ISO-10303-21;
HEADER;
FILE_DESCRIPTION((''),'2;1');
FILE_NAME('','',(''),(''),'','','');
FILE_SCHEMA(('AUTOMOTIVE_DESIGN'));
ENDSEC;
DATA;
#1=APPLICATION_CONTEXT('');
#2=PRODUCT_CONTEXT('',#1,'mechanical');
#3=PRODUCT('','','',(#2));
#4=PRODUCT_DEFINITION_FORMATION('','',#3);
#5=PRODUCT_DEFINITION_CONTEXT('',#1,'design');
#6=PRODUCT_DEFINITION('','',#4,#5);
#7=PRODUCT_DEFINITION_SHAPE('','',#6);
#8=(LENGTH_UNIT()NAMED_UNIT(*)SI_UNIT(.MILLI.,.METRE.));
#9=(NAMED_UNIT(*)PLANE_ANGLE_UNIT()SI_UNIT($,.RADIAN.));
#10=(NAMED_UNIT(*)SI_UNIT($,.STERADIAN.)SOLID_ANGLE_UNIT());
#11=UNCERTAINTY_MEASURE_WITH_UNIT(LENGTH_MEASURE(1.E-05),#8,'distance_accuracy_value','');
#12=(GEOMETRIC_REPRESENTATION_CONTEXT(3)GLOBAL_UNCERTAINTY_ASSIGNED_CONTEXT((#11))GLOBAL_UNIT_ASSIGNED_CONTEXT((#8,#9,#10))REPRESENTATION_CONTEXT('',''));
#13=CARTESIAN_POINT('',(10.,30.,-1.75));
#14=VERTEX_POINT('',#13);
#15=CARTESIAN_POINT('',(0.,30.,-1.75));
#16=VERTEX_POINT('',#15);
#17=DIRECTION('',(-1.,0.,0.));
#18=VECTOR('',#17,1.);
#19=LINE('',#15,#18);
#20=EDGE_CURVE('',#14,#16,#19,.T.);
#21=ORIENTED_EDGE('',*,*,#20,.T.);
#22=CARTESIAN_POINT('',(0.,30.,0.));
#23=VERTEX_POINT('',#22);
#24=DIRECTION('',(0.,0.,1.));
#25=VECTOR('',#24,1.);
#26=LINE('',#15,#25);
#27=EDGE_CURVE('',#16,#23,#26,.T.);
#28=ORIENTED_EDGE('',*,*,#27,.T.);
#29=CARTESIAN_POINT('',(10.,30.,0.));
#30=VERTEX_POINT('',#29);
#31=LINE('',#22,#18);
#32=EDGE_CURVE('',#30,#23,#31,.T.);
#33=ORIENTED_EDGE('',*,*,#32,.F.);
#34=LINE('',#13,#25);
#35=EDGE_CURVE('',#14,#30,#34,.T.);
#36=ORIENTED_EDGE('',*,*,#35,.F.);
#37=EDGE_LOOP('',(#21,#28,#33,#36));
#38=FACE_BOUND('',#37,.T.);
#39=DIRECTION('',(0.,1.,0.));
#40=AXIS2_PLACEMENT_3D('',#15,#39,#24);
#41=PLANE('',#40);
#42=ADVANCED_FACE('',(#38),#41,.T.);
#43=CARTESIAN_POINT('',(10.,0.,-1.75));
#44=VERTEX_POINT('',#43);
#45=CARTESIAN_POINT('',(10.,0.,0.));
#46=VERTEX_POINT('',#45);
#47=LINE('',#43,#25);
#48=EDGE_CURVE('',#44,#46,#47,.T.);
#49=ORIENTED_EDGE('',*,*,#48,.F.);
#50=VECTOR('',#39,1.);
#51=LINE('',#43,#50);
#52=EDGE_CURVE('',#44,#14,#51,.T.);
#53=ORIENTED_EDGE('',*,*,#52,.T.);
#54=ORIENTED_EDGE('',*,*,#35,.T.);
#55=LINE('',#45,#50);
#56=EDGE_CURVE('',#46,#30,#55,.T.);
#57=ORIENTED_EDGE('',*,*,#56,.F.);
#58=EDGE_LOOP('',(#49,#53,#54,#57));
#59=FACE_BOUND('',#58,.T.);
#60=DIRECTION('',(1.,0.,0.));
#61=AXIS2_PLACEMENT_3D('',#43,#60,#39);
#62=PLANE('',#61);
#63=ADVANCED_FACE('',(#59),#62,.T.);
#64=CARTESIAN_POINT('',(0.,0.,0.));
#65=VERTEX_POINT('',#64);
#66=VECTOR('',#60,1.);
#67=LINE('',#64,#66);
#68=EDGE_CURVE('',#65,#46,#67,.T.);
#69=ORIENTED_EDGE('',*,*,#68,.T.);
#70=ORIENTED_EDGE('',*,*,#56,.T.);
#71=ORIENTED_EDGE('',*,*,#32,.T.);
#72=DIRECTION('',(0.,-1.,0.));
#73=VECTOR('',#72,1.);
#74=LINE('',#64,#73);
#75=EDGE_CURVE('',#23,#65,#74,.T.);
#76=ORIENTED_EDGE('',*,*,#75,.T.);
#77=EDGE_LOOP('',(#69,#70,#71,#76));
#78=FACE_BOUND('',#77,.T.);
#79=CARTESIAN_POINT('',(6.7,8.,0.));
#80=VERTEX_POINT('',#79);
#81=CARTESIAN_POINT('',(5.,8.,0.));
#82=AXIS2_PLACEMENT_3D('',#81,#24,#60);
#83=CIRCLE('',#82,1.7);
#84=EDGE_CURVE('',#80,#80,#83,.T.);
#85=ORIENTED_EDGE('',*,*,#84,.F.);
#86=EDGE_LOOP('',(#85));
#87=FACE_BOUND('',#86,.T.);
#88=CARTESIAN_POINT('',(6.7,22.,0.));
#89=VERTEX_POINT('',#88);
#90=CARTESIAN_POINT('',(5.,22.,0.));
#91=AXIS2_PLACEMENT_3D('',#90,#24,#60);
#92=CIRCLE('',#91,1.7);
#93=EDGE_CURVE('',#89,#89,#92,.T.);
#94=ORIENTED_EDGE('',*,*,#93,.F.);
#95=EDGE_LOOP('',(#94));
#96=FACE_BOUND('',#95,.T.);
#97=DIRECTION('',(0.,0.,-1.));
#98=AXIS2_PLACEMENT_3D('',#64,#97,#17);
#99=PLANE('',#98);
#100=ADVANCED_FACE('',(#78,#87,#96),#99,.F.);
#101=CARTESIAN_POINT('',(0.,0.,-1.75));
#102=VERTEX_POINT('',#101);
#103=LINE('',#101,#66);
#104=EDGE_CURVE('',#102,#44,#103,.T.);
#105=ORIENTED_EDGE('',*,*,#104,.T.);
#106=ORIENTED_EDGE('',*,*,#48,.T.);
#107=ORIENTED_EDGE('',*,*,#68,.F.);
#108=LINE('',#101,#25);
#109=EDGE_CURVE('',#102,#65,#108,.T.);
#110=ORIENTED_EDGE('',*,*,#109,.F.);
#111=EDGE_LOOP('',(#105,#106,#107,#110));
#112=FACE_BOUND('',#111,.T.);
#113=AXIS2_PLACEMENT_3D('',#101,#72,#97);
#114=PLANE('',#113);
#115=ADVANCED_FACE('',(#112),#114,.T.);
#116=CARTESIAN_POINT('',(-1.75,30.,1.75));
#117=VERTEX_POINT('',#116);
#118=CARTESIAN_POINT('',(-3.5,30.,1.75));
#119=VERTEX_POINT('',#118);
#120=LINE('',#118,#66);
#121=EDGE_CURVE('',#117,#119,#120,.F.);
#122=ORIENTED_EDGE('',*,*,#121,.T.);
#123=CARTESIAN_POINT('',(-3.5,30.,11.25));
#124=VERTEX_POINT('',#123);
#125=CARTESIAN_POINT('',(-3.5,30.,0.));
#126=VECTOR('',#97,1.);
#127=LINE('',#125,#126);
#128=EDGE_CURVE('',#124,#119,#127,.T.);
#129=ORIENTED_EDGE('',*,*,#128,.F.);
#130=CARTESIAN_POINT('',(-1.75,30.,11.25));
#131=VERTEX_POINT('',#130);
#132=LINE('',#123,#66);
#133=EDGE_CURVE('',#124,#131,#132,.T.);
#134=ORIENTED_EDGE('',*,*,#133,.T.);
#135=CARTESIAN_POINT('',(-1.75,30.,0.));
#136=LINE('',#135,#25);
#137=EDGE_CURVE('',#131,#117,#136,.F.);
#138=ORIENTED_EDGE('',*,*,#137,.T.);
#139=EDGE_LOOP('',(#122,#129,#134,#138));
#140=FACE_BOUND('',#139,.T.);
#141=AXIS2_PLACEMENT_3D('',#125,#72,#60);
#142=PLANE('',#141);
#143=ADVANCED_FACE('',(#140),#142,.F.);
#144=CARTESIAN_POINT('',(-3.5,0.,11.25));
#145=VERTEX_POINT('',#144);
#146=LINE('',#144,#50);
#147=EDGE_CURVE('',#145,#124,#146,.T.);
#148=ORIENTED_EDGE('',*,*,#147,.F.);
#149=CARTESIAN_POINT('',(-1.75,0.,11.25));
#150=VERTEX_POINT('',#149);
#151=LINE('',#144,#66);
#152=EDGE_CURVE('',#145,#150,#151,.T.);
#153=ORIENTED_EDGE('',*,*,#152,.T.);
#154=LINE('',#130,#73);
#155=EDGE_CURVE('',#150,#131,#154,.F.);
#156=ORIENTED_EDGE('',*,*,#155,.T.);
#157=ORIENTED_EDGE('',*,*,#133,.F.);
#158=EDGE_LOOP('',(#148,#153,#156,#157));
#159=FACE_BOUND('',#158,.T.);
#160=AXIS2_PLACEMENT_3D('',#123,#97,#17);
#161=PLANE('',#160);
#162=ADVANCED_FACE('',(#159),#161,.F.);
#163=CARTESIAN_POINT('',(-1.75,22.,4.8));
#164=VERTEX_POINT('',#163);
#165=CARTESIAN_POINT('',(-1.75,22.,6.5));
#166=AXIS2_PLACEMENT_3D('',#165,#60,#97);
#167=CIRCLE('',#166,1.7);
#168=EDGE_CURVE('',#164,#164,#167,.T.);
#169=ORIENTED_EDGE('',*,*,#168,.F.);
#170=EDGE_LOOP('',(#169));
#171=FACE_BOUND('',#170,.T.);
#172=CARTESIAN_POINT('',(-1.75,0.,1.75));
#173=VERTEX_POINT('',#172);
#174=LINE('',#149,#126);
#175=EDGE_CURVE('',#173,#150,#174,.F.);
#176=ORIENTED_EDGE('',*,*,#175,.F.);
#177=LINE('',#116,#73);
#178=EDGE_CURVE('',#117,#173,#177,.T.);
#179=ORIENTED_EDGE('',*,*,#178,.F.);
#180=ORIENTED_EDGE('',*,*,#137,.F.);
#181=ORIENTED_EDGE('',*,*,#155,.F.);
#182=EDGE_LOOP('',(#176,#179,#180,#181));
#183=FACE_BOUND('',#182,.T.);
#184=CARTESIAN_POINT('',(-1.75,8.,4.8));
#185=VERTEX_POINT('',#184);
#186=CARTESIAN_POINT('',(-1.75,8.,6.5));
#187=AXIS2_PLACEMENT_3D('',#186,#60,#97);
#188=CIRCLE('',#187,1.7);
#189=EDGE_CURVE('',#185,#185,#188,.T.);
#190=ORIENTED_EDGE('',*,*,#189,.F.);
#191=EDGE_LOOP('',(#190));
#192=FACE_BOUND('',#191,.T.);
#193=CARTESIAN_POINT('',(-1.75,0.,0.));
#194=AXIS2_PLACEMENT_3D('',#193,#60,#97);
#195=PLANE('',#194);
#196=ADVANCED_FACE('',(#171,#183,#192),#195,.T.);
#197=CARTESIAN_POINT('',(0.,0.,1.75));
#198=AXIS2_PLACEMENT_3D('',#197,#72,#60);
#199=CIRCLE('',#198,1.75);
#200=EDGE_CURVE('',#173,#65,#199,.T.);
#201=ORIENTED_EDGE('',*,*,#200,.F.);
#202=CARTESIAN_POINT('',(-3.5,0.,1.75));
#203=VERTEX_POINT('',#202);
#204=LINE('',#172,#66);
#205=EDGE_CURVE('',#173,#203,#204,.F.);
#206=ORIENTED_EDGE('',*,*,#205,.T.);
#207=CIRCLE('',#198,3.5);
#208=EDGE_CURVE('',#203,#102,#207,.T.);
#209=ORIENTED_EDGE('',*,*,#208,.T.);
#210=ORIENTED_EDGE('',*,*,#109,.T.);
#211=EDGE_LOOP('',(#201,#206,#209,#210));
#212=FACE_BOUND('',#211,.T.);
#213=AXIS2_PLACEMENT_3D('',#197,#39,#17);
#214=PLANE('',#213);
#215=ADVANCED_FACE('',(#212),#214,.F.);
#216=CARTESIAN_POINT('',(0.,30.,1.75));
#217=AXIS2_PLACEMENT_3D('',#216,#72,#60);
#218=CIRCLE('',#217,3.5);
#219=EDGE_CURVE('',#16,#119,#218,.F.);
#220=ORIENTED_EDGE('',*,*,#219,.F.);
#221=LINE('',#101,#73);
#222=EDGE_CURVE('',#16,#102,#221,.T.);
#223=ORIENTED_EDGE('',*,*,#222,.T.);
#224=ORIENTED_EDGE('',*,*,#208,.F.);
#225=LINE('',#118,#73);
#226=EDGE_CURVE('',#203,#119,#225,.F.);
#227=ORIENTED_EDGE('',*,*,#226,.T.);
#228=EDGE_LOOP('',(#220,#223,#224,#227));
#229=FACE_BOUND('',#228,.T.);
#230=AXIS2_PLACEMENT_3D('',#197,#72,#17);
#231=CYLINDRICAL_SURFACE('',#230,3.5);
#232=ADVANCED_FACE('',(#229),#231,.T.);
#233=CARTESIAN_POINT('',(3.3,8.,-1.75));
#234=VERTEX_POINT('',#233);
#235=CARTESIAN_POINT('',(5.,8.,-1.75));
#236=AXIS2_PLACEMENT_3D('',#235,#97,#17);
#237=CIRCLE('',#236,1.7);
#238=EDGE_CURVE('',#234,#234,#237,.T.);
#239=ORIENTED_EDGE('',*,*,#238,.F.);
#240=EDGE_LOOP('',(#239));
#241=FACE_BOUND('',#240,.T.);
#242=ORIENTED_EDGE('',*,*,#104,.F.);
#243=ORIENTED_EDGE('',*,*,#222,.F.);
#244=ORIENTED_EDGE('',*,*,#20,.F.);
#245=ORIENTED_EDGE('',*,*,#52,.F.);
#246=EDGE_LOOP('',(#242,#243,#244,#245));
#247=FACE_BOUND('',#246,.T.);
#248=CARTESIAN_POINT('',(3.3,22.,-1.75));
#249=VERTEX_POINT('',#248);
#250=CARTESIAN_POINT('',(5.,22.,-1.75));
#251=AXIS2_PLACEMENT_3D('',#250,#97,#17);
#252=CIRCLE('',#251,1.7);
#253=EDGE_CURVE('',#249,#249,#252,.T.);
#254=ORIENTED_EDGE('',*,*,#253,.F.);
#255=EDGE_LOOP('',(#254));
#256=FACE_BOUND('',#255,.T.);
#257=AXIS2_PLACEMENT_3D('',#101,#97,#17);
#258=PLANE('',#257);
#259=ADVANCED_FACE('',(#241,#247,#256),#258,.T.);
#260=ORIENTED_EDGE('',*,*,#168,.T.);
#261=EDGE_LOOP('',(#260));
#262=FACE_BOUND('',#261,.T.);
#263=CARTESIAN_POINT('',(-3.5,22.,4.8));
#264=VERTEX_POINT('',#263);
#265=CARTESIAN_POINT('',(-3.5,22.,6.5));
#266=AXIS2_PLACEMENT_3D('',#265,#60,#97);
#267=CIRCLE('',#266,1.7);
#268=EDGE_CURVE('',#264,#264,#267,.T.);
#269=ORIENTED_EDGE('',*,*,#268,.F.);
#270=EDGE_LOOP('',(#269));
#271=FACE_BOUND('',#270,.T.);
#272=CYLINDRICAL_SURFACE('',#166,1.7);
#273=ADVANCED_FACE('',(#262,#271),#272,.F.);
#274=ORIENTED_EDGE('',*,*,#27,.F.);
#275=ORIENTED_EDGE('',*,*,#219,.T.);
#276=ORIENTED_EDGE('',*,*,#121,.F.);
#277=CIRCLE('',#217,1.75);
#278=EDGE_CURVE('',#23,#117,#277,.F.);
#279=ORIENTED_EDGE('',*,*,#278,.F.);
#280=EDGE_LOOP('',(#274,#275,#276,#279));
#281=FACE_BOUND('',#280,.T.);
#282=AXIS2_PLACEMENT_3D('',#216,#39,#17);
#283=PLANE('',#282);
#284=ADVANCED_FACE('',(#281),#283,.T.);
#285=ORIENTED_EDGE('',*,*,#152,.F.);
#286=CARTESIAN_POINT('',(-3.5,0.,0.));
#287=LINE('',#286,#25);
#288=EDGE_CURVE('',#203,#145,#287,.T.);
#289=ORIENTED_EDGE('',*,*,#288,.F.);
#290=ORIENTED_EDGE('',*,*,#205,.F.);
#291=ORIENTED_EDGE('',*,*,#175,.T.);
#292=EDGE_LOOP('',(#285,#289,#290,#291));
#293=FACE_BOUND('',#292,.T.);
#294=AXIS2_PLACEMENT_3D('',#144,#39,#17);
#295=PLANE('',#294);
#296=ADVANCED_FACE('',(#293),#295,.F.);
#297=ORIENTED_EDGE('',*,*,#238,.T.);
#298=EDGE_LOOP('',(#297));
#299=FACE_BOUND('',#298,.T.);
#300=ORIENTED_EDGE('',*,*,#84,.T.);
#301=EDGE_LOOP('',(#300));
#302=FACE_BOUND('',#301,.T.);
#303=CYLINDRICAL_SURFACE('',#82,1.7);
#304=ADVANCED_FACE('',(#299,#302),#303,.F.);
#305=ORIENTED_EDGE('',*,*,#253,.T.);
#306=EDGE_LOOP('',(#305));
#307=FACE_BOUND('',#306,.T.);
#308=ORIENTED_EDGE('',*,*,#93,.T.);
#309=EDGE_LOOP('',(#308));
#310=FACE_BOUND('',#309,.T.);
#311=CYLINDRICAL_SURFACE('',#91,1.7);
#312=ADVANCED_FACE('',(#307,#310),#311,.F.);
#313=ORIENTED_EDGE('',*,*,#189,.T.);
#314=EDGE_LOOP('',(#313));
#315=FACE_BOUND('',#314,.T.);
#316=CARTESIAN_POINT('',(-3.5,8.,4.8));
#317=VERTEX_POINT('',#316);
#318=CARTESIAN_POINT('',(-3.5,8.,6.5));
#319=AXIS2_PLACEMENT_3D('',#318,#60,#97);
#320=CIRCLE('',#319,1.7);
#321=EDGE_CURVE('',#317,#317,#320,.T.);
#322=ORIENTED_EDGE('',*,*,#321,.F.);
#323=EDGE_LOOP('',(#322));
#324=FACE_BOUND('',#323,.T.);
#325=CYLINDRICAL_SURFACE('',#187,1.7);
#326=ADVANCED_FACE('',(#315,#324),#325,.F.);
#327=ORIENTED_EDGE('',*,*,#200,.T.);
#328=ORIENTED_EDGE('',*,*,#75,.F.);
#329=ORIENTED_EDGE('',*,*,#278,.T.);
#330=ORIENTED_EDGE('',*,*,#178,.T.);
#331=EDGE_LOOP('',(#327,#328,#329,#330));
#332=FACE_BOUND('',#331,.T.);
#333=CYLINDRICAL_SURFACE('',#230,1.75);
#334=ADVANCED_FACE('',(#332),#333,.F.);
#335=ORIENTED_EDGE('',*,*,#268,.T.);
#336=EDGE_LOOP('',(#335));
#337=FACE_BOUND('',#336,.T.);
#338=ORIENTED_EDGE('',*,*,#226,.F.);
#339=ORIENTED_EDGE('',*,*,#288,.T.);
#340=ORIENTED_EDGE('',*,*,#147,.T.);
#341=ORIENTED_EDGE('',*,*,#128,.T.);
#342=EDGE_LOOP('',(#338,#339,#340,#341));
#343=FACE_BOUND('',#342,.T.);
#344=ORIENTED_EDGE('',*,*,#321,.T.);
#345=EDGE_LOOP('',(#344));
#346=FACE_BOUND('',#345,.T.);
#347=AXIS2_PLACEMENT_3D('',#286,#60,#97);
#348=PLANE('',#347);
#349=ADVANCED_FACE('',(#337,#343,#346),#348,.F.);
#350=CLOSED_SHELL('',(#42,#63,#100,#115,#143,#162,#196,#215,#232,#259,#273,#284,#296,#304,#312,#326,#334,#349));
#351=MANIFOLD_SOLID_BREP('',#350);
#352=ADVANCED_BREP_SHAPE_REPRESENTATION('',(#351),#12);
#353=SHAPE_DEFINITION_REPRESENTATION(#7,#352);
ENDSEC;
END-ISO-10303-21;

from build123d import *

# Parameters (mm, degrees)
SKETCH1_W                          = 10
SKETCH1_H                          = 30
BASE_FLANGE1_DEPTH                 = 1.75
EDGE_FLANGE1_DEPTH                 = 30
M3_CLEARANCE_HOLE1_D               = 3.4
M3_CLEARANCE_HOLE1_DEPTH           = 5
M3_CLEARANCE_HOLE1_TIP             = 1.021463052
M3_CLEARANCE_HOLE1_ON_FACE_2_D     = 3.4
M3_CLEARANCE_HOLE1_ON_FACE_2_DEPTH = 5
M3_CLEARANCE_HOLE1_ON_FACE_2_TIP   = 1.021463052


# Sheet-metal steps are written as plain solids
with BuildPart() as part:
    # Sketch1 → Base-Flange1 (new body)
    with BuildSketch(Plane.XY):
        with Locations((5, 15)):
            Rectangle(SKETCH1_W, SKETCH1_H)
    extrude(amount=-BASE_FLANGE1_DEPTH)

    # Edge-Flange1 section (across the edge) → Edge-Flange1 (add)
    with BuildSketch(Plane(origin=(-1.75, 30, 0), x_dir=(1, 0, 0), z_dir=(0, -1, 0))):
        with BuildLine():
            Line((-1.75, 1.75), (-1.75, 11.25))
            Line((-1.75, 11.25), (0, 11.25))
            Line((0, 11.25), (0, 1.75))
            ThreePointArc((0, 1.75), (0.512563133, 0.512563133), (1.75, 0))
            Line((1.75, 0), (1.75, -1.75))
            ThreePointArc((1.75, -1.75), (-0.724873734, -0.724873734), (-1.75, 1.75))
        make_face()
    extrude(amount=EDGE_FLANGE1_DEPTH)

    # M3 Clearance Hole1
    with Locations(Plane(origin=(5, 22, 0), x_dir=(1, 0, 0), z_dir=(0, 0, 1))):
        with Locations((0, 0), (0, -14)):
            Hole(M3_CLEARANCE_HOLE1_D / 2, depth=M3_CLEARANCE_HOLE1_DEPTH)
            with Locations((0, 0, -(M3_CLEARANCE_HOLE1_DEPTH + M3_CLEARANCE_HOLE1_TIP / 2))):  # 118° drill point
                Cone(0, M3_CLEARANCE_HOLE1_D / 2, M3_CLEARANCE_HOLE1_TIP, mode=Mode.SUBTRACT)

    # M3 Clearance Hole1 on face 2
    with Locations(Plane(origin=(-1.75, 22, 6.5), x_dir=(0, 0, 1), z_dir=(1, 0, 0))):
        with Locations((0, 0), (0, 14)):
            Hole(M3_CLEARANCE_HOLE1_ON_FACE_2_D / 2, depth=M3_CLEARANCE_HOLE1_ON_FACE_2_DEPTH)
            with Locations((0, 0, -(M3_CLEARANCE_HOLE1_ON_FACE_2_DEPTH + M3_CLEARANCE_HOLE1_ON_FACE_2_TIP / 2))):  # 118° drill point
                Cone(0, M3_CLEARANCE_HOLE1_ON_FACE_2_D / 2, M3_CLEARANCE_HOLE1_ON_FACE_2_TIP, mode=Mode.SUBTRACT)


solid = part.part
